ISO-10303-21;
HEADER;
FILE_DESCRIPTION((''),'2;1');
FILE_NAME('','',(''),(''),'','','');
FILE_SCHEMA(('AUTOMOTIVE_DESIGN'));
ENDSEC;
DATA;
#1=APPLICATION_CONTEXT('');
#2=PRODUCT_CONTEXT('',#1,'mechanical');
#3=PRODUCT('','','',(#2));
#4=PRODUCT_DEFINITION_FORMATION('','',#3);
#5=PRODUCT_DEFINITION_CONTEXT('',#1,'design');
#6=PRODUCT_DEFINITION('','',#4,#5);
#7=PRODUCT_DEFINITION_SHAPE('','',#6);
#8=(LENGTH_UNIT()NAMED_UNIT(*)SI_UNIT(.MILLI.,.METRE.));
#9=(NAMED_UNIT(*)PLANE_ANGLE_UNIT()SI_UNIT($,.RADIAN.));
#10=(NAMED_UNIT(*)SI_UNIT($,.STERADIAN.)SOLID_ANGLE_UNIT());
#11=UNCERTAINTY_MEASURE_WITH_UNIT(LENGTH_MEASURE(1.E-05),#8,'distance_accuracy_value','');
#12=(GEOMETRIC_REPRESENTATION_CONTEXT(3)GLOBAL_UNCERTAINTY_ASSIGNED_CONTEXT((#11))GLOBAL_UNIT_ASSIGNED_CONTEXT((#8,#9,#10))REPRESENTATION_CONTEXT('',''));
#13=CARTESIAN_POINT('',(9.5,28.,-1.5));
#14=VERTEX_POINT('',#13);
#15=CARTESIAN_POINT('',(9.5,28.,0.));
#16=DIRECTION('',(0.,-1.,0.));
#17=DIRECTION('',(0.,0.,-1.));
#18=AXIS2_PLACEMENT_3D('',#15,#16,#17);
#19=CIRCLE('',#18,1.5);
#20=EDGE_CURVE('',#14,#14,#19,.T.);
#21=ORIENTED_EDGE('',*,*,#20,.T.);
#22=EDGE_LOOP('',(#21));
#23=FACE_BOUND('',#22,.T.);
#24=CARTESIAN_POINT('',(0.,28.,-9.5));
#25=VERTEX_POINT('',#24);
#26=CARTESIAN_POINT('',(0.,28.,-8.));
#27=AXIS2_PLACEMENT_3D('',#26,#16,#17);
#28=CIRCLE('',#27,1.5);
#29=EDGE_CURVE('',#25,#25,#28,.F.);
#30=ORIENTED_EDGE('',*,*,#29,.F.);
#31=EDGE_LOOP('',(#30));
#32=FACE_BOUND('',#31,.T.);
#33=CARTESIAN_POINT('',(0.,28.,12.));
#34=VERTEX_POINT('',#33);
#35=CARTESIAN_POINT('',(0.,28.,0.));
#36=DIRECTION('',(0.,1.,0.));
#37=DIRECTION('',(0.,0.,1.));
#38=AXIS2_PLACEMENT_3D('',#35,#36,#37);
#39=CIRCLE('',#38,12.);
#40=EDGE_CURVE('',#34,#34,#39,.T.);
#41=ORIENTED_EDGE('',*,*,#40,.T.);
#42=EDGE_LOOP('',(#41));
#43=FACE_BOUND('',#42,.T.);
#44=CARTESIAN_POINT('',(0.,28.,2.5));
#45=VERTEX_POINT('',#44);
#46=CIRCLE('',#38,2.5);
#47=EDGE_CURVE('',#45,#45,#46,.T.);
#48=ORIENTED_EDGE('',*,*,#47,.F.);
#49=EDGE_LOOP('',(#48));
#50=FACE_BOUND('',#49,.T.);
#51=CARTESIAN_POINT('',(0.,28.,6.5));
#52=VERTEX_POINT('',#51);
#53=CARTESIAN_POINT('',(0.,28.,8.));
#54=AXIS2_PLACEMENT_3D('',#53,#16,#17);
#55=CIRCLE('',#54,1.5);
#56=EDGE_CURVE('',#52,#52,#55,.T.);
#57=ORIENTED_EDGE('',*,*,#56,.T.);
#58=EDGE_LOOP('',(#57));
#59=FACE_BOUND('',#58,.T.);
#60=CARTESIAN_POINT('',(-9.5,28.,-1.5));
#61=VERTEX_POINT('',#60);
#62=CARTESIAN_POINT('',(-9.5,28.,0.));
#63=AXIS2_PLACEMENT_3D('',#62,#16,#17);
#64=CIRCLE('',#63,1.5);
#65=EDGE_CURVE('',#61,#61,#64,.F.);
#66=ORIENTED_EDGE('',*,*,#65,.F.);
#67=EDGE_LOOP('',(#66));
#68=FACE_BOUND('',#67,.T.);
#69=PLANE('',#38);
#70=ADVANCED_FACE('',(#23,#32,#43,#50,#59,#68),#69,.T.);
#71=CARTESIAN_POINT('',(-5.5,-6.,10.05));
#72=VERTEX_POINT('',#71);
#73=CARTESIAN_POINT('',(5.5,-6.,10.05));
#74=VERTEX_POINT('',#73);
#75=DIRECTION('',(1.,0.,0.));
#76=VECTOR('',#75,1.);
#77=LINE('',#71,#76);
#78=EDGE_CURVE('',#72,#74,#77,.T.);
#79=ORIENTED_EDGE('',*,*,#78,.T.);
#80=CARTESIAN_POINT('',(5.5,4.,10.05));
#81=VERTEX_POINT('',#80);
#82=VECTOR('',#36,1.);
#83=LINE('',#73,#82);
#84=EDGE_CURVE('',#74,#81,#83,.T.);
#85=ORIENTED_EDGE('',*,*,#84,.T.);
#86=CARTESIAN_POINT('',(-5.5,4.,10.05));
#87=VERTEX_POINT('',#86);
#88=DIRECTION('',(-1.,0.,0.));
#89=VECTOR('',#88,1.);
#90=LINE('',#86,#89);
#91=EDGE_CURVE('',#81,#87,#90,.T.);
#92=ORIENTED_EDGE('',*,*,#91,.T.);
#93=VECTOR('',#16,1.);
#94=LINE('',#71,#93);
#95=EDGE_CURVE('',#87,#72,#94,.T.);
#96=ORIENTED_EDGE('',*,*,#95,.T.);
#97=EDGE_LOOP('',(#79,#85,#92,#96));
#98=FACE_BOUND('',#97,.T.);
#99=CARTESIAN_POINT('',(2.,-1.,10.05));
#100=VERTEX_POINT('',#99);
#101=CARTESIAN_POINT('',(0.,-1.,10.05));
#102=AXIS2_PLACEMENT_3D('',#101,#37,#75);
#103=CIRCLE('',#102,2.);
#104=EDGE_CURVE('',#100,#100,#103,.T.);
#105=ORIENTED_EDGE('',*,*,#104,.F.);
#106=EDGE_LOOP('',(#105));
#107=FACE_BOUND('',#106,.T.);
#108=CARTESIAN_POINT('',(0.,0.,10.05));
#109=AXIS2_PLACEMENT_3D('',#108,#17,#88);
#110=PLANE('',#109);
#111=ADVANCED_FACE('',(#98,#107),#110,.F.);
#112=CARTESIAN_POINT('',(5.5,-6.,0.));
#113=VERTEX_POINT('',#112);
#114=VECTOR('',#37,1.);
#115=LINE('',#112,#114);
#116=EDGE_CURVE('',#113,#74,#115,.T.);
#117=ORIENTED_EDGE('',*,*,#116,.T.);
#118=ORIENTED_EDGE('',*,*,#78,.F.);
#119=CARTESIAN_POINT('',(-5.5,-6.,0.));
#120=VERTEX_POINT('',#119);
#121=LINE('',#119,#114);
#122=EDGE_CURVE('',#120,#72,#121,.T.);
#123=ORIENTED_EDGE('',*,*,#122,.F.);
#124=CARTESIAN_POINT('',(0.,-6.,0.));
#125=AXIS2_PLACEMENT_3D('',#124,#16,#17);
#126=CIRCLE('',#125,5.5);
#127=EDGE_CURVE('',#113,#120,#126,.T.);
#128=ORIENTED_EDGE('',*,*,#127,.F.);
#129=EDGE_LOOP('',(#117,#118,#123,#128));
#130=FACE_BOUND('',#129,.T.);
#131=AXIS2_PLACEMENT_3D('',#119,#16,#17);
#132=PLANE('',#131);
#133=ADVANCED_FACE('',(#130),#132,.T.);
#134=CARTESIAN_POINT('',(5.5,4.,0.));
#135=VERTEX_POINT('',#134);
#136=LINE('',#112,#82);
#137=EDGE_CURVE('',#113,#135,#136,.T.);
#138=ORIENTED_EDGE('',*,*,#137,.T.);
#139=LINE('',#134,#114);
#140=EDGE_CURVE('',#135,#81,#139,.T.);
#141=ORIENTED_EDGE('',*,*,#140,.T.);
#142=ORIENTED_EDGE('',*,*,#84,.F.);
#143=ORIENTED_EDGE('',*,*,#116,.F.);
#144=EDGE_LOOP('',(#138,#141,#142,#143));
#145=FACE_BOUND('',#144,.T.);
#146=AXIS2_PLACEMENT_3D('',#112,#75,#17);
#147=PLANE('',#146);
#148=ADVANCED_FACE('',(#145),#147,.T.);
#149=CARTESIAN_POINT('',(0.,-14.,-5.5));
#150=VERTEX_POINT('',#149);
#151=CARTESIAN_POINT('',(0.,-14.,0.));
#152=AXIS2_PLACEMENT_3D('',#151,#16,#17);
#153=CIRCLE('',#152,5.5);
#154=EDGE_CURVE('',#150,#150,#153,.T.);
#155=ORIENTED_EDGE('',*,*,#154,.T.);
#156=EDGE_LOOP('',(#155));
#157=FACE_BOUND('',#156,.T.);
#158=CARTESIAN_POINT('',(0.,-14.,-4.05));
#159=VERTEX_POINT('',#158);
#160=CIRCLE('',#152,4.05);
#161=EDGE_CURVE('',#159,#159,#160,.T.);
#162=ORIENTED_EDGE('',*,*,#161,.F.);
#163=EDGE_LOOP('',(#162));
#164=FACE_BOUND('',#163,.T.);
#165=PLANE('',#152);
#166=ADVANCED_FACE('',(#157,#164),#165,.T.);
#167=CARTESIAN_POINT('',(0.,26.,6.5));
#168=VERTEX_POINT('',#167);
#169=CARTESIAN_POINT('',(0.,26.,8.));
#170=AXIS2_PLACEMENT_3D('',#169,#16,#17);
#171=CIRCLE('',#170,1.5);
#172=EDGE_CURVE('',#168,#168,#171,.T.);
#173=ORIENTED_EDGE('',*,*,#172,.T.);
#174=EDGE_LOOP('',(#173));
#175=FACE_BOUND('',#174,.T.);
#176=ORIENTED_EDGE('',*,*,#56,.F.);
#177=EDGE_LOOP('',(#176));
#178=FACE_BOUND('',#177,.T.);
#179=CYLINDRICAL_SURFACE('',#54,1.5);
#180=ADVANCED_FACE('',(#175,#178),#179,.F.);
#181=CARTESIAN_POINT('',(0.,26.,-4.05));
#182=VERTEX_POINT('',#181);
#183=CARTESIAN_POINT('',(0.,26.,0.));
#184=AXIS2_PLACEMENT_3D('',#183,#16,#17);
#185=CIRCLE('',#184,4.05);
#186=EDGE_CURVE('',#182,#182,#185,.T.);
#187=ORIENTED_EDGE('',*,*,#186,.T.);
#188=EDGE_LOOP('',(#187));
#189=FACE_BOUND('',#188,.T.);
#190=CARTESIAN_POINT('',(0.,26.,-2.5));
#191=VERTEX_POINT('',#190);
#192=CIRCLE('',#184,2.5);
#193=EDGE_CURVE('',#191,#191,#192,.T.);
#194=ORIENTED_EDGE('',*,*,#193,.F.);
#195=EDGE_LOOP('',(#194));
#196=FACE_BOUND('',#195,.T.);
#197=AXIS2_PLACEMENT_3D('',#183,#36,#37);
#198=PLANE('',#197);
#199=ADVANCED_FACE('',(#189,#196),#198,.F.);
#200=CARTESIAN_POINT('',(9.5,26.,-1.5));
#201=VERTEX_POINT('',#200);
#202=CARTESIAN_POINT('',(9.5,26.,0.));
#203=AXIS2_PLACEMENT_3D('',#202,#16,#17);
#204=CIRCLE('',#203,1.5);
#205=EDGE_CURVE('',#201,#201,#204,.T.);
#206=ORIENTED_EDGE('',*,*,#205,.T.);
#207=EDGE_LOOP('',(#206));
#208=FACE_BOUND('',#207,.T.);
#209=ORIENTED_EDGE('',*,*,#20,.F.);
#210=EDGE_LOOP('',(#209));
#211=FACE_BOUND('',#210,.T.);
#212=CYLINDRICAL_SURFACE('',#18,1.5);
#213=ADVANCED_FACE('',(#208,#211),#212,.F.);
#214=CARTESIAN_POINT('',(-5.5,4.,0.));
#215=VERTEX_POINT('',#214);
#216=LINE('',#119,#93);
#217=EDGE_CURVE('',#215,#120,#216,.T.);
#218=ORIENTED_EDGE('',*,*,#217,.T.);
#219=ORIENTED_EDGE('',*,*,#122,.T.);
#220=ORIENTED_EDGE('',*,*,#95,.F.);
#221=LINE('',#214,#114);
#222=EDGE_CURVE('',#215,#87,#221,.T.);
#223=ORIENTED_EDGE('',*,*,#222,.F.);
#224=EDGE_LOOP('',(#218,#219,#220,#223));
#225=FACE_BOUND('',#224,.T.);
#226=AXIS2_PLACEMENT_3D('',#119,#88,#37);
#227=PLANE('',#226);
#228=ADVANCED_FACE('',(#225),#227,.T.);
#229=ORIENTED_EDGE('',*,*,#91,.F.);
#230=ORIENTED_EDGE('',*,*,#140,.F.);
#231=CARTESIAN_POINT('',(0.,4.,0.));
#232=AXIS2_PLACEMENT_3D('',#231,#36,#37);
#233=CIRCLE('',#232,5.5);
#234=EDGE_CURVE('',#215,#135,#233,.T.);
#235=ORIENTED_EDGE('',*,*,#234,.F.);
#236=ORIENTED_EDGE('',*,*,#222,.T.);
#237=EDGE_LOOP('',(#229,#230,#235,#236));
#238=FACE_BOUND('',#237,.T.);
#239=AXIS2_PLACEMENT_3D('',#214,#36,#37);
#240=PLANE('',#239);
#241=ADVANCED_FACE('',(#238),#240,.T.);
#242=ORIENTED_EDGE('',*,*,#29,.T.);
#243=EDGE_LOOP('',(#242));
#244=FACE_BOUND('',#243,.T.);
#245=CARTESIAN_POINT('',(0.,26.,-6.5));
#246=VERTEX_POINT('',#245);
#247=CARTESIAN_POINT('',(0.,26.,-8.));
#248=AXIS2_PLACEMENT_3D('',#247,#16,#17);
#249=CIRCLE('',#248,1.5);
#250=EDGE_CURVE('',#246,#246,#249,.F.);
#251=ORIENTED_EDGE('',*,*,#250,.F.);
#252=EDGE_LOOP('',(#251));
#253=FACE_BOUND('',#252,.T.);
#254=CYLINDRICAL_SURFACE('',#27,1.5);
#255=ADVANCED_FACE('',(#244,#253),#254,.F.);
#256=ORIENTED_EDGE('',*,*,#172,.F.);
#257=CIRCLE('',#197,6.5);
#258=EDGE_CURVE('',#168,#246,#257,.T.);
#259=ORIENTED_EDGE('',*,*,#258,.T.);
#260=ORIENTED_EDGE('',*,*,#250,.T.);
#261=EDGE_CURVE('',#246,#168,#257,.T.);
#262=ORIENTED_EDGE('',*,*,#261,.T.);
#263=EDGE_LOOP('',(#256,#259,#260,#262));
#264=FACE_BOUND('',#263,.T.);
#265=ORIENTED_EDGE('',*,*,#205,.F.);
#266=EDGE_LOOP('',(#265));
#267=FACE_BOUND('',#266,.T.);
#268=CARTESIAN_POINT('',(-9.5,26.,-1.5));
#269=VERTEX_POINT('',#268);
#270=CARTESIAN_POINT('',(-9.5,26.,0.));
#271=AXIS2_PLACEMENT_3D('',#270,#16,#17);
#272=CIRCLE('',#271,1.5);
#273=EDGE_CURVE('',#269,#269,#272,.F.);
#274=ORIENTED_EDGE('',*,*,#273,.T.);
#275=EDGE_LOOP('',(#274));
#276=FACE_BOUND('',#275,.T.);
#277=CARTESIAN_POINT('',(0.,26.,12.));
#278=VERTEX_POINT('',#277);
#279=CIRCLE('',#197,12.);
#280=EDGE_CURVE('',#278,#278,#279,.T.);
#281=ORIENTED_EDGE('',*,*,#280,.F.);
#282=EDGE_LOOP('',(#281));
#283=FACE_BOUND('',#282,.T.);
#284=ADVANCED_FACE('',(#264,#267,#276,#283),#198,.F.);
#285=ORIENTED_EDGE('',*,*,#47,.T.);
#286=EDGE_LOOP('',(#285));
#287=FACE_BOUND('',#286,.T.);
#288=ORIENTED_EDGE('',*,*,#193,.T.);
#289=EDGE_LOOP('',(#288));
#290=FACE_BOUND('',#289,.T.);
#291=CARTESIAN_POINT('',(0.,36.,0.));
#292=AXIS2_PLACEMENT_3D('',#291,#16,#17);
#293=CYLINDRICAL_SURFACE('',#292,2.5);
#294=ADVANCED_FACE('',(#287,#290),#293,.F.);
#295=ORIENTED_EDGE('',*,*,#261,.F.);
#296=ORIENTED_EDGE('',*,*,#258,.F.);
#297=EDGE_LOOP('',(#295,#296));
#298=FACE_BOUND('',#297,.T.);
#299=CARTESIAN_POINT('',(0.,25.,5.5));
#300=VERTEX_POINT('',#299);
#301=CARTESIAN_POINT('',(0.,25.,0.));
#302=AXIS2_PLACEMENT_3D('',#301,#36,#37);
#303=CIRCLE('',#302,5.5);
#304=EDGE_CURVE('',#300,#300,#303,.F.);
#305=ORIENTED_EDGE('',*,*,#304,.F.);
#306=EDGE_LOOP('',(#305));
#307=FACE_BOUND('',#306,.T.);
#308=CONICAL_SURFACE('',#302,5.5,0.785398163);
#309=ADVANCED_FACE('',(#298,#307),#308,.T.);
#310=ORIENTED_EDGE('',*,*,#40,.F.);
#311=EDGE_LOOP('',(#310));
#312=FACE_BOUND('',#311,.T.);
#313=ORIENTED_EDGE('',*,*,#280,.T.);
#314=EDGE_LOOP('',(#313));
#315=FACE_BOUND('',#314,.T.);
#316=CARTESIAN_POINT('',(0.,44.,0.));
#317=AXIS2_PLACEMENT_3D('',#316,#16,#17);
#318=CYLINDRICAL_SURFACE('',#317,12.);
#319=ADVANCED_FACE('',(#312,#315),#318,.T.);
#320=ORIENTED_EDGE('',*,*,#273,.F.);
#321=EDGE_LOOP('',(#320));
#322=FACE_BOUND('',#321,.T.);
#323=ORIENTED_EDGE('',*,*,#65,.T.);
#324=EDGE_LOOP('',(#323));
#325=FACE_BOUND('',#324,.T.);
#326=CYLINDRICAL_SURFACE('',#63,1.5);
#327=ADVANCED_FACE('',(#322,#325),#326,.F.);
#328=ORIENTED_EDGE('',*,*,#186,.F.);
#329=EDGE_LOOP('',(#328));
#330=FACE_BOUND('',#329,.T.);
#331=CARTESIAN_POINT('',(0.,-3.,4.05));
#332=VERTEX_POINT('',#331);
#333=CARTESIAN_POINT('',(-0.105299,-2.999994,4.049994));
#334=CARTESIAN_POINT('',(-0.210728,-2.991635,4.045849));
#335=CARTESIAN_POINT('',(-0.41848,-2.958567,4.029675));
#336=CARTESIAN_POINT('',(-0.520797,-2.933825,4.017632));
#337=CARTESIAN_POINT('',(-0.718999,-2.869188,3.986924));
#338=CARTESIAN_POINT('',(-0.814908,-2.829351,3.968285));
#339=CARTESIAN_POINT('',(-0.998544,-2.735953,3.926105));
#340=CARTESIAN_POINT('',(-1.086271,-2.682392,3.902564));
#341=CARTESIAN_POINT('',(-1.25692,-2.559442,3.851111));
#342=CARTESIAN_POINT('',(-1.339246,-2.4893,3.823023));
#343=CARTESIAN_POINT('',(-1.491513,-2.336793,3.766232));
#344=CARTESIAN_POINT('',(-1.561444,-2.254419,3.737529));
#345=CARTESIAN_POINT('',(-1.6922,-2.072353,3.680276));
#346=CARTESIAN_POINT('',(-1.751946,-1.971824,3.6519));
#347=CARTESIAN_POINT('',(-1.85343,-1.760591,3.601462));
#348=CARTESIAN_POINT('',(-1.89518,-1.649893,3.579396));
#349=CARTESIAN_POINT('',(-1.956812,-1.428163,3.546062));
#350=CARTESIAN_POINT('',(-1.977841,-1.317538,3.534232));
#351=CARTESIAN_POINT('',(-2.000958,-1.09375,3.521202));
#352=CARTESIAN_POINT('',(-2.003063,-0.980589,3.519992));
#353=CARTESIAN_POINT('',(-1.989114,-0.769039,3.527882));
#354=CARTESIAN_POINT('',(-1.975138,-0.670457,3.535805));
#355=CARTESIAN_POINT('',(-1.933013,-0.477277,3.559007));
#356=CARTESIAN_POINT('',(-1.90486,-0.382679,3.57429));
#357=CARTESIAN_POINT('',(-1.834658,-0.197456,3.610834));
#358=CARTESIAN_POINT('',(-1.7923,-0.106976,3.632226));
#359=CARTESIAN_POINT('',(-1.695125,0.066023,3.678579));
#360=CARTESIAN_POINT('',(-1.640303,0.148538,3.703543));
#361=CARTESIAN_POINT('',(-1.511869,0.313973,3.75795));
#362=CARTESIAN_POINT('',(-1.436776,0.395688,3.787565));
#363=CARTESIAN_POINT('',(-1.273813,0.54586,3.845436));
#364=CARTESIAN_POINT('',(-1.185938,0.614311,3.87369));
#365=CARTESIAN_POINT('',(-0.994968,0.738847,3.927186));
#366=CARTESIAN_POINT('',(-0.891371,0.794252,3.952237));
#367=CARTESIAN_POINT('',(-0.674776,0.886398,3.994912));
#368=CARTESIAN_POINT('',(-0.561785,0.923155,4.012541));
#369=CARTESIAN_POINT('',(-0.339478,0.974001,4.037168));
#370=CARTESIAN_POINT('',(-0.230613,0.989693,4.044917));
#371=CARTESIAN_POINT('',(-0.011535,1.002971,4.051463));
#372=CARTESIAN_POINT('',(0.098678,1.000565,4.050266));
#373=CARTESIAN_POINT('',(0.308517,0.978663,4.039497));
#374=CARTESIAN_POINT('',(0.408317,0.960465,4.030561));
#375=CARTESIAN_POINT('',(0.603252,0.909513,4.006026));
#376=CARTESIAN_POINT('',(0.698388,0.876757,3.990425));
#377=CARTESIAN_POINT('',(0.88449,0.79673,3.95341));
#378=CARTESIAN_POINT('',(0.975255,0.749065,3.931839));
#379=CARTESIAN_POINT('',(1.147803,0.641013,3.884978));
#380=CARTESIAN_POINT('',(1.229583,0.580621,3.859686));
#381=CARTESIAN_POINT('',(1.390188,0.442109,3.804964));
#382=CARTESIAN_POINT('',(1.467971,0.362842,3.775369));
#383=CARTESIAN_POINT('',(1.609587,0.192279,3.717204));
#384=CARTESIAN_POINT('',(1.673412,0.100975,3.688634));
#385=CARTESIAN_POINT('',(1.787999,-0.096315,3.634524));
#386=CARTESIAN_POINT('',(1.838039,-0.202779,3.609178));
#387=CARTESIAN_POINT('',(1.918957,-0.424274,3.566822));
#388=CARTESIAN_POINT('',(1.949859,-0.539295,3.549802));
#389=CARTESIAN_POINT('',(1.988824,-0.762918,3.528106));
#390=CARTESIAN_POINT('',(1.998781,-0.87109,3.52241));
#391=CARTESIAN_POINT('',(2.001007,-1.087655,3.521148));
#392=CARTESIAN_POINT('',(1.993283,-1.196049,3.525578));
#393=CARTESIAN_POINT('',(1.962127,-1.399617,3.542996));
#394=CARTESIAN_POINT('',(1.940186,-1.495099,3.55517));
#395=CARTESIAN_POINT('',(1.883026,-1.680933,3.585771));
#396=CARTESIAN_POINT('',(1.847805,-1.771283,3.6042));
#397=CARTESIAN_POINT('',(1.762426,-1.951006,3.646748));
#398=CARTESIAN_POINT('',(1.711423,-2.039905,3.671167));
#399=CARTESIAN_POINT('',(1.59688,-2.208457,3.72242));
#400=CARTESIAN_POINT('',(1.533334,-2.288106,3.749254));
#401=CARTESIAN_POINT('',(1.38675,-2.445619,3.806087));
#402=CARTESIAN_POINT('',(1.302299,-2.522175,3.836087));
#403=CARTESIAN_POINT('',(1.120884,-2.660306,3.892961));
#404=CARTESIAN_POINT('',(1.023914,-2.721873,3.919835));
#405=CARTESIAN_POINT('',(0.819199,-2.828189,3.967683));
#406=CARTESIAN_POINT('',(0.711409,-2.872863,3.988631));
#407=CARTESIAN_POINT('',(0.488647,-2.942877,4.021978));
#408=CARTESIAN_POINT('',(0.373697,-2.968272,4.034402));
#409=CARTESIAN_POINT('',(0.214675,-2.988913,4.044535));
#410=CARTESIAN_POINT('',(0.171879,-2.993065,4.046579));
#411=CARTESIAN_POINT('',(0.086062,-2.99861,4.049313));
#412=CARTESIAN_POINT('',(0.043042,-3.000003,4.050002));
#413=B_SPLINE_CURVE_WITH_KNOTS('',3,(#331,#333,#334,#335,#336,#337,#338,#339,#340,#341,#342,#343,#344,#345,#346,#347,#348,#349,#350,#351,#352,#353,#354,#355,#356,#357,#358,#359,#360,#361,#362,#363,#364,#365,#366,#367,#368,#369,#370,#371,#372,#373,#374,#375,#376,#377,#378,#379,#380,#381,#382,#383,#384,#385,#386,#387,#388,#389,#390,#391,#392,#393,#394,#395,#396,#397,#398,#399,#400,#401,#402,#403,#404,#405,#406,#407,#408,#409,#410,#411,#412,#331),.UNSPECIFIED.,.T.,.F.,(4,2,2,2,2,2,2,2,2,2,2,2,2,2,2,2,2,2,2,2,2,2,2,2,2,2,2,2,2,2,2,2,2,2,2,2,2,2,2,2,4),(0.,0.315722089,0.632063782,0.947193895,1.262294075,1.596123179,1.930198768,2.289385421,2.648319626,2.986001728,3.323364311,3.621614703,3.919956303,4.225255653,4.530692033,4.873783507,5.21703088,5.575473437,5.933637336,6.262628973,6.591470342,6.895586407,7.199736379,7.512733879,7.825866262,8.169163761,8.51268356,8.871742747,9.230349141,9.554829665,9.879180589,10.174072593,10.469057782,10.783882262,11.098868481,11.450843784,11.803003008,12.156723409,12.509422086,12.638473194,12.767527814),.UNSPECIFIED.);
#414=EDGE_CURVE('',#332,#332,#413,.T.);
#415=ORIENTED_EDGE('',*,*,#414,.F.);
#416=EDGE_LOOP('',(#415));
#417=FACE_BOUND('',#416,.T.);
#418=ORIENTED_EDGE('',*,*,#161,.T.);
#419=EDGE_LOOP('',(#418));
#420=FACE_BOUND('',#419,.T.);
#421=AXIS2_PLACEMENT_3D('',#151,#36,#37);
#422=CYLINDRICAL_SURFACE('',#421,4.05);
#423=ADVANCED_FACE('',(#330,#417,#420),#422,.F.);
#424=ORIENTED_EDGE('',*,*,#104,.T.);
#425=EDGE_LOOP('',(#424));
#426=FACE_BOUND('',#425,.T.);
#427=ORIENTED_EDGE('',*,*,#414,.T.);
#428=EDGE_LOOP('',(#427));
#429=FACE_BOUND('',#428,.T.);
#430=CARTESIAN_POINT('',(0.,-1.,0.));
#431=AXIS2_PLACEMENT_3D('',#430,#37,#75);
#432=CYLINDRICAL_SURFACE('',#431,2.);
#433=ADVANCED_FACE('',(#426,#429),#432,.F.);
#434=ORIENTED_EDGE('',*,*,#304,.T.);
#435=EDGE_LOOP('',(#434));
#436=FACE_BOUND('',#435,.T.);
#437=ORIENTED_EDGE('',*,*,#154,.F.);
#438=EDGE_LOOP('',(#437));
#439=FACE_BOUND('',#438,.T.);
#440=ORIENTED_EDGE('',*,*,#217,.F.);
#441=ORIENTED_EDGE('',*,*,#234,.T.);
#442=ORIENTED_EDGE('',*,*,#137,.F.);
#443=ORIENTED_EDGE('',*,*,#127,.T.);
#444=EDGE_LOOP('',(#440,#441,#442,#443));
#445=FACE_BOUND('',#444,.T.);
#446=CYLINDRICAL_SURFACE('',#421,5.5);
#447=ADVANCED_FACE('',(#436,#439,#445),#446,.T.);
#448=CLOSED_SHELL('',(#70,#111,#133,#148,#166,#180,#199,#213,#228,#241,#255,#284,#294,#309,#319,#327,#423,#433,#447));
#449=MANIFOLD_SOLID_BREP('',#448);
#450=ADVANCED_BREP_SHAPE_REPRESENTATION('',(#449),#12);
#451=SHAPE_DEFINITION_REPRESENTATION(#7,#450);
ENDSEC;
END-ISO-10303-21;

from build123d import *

# Parameters (mm, degrees)
SKETCH1_R                = 16
SKETCH1_R_2              = 14
BOSS_EXTRUDE1_DEPTH      = 26
SKETCH2_R                = 16
BOSS_EXTRUDE2_DEPTH      = 2
SKETCH3_R                = 1.5
CUT_EXTRUDE1_DEPTH       = 2
CUT_EXTRUDE2_DEPTH       = 26
SKETCH5_R                = 2.5
CUT_EXTRUDE3_DEPTH       = 10
SKETCH9_R                = 22.610796359
SKETCH9_R_2              = 12
CUT_EXTRUDE4_DEPTH       = 44
SKETCH10_R               = 5.5
SKETCH10_R_2             = 4.05
BOSS_EXTRUDE3_DEPTH      = 40
BOSS_EXTRUDE4_DEPTH      = 6
BOSS_EXTRUDE4_DEPTH_BACK = 4.05
SKETCH13_W               = 11
SKETCH13_H               = 10
SKETCH13_R               = 2
CUT_EXTRUDE5_START       = -33
SKETCH14_R               = 4.05
CUT_EXTRUDE5_DEPTH       = 33
CUT_EXTRUDE6_START       = -10
SKETCH15_R               = 2
CUT_EXTRUDE6_DEPTH       = 10
CHAMFER3_SIZE            = 1


with BuildPart() as part:
    # Sketch1 → Boss-Extrude1 (new body)
    with BuildSketch(Plane(origin=(0, 0, 0), x_dir=(1, 0, 0), z_dir=(0, 1, 0))):
        with Locations(Location((0, 0, 0), (0, 0, 90))):
            Circle(SKETCH1_R)
        with Locations(Location((0, 0, 0), (0, 0, 90))):
            Circle(SKETCH1_R_2, mode=Mode.SUBTRACT)
    extrude(amount=BOSS_EXTRUDE1_DEPTH)

    # Sketch2 → Boss-Extrude2 (add)
    with BuildSketch(Plane(origin=(0, 26, 0), x_dir=(1, 0, 0), z_dir=(0, 1, 0))):
        with Locations(Location((0, 0, 0), (0, 0, 90))):
            Circle(SKETCH2_R)
    extrude(amount=BOSS_EXTRUDE2_DEPTH)

    # Sketch3 → Cut-Extrude1 (cut)
    with BuildSketch(Plane.XZ.offset(-26)):
        with Locations(Location((0, 8, 0), (0, 0, 270))):
            Circle(SKETCH3_R)
        with Locations(Location((9.5, 0, 0), (0, 0, 270))):
            Circle(SKETCH3_R)
        with Locations(Location((-9.5, 0, 0), (0, 0, 270))):
            Circle(SKETCH3_R)
        with Locations(Location((0, -8, 0), (0, 0, 270))):
            Circle(SKETCH3_R)
    extrude(amount=-CUT_EXTRUDE1_DEPTH, mode=Mode.SUBTRACT)

    # Sketch4 → Cut-Extrude2 (cut)
    with BuildSketch(Plane.XZ):
        Polygon((-0.813172798, -5.550788232), (5.550788232, 0.813172798), (16.15738995, -9.793428919), (9.793428919, -16.15738995), align=None)
    extrude(amount=-CUT_EXTRUDE2_DEPTH, mode=Mode.SUBTRACT)

    # Sketch5 → Cut-Extrude3 (cut)
    with BuildSketch(Plane.XZ.offset(-26)):
        with Locations(Location((0, 0, 0), (0, 0, 270))):
            Circle(SKETCH5_R)
    extrude(amount=-CUT_EXTRUDE3_DEPTH, mode=Mode.SUBTRACT)

    # Sketch9 → Cut-Extrude4 (cut)
    with BuildSketch(Plane.XZ):
        Circle(SKETCH9_R)
        with Locations(Location((0, 0, 0), (0, 0, 90))):
            Circle(SKETCH9_R_2, mode=Mode.SUBTRACT)
    extrude(amount=-CUT_EXTRUDE4_DEPTH, mode=Mode.SUBTRACT)

    # Sketch10 → Boss-Extrude3 (add)
    with BuildSketch(Plane.XZ.offset(-26)):
        with Locations(Location((0, 0, 0), (0, 0, 90))):
            Circle(SKETCH10_R)
        with Locations(Location((0, 0, 0), (0, 0, 270))):
            Circle(SKETCH10_R_2, mode=Mode.SUBTRACT)
    extrude(amount=BOSS_EXTRUDE3_DEPTH)

    # Sketch13 → Boss-Extrude4 (add, two sides: drawn at the far end of the back side and taken through both)
    with BuildSketch(Plane.XY.offset(4.05).offset(-BOSS_EXTRUDE4_DEPTH_BACK)):
        with Locations((0, -1)):
            Rectangle(SKETCH13_W, SKETCH13_H)
        with Locations((0, -1)):
            Circle(SKETCH13_R, mode=Mode.SUBTRACT)
    extrude(amount=BOSS_EXTRUDE4_DEPTH + BOSS_EXTRUDE4_DEPTH_BACK)

    # Sketch14 → Cut-Extrude5 (cut)
    with BuildSketch(Plane.XZ.offset(14).offset(CUT_EXTRUDE5_START)):
        with Locations(Location((0, 0, 0), (0, 0, 270))):
            Circle(SKETCH14_R)
    extrude(amount=CUT_EXTRUDE5_DEPTH, mode=Mode.SUBTRACT)

    # Sketch15 → Cut-Extrude6 (cut)
    with BuildSketch(Plane.XY.offset(10.05).offset(CUT_EXTRUDE6_START)):
        with Locations((0, -1)):
            Circle(SKETCH15_R)
    extrude(amount=CUT_EXTRUDE6_DEPTH, mode=Mode.SUBTRACT)

    # Chamfer3
    chamfer3_edges = [part.edges().sort_by_distance(p)[0] for p in [
        (0, 26, -5.5),
    ]]
    chamfer(chamfer3_edges, length=CHAMFER3_SIZE - 0.0001)  # a hair under: the kernel refuses the full size


solid = part.part
